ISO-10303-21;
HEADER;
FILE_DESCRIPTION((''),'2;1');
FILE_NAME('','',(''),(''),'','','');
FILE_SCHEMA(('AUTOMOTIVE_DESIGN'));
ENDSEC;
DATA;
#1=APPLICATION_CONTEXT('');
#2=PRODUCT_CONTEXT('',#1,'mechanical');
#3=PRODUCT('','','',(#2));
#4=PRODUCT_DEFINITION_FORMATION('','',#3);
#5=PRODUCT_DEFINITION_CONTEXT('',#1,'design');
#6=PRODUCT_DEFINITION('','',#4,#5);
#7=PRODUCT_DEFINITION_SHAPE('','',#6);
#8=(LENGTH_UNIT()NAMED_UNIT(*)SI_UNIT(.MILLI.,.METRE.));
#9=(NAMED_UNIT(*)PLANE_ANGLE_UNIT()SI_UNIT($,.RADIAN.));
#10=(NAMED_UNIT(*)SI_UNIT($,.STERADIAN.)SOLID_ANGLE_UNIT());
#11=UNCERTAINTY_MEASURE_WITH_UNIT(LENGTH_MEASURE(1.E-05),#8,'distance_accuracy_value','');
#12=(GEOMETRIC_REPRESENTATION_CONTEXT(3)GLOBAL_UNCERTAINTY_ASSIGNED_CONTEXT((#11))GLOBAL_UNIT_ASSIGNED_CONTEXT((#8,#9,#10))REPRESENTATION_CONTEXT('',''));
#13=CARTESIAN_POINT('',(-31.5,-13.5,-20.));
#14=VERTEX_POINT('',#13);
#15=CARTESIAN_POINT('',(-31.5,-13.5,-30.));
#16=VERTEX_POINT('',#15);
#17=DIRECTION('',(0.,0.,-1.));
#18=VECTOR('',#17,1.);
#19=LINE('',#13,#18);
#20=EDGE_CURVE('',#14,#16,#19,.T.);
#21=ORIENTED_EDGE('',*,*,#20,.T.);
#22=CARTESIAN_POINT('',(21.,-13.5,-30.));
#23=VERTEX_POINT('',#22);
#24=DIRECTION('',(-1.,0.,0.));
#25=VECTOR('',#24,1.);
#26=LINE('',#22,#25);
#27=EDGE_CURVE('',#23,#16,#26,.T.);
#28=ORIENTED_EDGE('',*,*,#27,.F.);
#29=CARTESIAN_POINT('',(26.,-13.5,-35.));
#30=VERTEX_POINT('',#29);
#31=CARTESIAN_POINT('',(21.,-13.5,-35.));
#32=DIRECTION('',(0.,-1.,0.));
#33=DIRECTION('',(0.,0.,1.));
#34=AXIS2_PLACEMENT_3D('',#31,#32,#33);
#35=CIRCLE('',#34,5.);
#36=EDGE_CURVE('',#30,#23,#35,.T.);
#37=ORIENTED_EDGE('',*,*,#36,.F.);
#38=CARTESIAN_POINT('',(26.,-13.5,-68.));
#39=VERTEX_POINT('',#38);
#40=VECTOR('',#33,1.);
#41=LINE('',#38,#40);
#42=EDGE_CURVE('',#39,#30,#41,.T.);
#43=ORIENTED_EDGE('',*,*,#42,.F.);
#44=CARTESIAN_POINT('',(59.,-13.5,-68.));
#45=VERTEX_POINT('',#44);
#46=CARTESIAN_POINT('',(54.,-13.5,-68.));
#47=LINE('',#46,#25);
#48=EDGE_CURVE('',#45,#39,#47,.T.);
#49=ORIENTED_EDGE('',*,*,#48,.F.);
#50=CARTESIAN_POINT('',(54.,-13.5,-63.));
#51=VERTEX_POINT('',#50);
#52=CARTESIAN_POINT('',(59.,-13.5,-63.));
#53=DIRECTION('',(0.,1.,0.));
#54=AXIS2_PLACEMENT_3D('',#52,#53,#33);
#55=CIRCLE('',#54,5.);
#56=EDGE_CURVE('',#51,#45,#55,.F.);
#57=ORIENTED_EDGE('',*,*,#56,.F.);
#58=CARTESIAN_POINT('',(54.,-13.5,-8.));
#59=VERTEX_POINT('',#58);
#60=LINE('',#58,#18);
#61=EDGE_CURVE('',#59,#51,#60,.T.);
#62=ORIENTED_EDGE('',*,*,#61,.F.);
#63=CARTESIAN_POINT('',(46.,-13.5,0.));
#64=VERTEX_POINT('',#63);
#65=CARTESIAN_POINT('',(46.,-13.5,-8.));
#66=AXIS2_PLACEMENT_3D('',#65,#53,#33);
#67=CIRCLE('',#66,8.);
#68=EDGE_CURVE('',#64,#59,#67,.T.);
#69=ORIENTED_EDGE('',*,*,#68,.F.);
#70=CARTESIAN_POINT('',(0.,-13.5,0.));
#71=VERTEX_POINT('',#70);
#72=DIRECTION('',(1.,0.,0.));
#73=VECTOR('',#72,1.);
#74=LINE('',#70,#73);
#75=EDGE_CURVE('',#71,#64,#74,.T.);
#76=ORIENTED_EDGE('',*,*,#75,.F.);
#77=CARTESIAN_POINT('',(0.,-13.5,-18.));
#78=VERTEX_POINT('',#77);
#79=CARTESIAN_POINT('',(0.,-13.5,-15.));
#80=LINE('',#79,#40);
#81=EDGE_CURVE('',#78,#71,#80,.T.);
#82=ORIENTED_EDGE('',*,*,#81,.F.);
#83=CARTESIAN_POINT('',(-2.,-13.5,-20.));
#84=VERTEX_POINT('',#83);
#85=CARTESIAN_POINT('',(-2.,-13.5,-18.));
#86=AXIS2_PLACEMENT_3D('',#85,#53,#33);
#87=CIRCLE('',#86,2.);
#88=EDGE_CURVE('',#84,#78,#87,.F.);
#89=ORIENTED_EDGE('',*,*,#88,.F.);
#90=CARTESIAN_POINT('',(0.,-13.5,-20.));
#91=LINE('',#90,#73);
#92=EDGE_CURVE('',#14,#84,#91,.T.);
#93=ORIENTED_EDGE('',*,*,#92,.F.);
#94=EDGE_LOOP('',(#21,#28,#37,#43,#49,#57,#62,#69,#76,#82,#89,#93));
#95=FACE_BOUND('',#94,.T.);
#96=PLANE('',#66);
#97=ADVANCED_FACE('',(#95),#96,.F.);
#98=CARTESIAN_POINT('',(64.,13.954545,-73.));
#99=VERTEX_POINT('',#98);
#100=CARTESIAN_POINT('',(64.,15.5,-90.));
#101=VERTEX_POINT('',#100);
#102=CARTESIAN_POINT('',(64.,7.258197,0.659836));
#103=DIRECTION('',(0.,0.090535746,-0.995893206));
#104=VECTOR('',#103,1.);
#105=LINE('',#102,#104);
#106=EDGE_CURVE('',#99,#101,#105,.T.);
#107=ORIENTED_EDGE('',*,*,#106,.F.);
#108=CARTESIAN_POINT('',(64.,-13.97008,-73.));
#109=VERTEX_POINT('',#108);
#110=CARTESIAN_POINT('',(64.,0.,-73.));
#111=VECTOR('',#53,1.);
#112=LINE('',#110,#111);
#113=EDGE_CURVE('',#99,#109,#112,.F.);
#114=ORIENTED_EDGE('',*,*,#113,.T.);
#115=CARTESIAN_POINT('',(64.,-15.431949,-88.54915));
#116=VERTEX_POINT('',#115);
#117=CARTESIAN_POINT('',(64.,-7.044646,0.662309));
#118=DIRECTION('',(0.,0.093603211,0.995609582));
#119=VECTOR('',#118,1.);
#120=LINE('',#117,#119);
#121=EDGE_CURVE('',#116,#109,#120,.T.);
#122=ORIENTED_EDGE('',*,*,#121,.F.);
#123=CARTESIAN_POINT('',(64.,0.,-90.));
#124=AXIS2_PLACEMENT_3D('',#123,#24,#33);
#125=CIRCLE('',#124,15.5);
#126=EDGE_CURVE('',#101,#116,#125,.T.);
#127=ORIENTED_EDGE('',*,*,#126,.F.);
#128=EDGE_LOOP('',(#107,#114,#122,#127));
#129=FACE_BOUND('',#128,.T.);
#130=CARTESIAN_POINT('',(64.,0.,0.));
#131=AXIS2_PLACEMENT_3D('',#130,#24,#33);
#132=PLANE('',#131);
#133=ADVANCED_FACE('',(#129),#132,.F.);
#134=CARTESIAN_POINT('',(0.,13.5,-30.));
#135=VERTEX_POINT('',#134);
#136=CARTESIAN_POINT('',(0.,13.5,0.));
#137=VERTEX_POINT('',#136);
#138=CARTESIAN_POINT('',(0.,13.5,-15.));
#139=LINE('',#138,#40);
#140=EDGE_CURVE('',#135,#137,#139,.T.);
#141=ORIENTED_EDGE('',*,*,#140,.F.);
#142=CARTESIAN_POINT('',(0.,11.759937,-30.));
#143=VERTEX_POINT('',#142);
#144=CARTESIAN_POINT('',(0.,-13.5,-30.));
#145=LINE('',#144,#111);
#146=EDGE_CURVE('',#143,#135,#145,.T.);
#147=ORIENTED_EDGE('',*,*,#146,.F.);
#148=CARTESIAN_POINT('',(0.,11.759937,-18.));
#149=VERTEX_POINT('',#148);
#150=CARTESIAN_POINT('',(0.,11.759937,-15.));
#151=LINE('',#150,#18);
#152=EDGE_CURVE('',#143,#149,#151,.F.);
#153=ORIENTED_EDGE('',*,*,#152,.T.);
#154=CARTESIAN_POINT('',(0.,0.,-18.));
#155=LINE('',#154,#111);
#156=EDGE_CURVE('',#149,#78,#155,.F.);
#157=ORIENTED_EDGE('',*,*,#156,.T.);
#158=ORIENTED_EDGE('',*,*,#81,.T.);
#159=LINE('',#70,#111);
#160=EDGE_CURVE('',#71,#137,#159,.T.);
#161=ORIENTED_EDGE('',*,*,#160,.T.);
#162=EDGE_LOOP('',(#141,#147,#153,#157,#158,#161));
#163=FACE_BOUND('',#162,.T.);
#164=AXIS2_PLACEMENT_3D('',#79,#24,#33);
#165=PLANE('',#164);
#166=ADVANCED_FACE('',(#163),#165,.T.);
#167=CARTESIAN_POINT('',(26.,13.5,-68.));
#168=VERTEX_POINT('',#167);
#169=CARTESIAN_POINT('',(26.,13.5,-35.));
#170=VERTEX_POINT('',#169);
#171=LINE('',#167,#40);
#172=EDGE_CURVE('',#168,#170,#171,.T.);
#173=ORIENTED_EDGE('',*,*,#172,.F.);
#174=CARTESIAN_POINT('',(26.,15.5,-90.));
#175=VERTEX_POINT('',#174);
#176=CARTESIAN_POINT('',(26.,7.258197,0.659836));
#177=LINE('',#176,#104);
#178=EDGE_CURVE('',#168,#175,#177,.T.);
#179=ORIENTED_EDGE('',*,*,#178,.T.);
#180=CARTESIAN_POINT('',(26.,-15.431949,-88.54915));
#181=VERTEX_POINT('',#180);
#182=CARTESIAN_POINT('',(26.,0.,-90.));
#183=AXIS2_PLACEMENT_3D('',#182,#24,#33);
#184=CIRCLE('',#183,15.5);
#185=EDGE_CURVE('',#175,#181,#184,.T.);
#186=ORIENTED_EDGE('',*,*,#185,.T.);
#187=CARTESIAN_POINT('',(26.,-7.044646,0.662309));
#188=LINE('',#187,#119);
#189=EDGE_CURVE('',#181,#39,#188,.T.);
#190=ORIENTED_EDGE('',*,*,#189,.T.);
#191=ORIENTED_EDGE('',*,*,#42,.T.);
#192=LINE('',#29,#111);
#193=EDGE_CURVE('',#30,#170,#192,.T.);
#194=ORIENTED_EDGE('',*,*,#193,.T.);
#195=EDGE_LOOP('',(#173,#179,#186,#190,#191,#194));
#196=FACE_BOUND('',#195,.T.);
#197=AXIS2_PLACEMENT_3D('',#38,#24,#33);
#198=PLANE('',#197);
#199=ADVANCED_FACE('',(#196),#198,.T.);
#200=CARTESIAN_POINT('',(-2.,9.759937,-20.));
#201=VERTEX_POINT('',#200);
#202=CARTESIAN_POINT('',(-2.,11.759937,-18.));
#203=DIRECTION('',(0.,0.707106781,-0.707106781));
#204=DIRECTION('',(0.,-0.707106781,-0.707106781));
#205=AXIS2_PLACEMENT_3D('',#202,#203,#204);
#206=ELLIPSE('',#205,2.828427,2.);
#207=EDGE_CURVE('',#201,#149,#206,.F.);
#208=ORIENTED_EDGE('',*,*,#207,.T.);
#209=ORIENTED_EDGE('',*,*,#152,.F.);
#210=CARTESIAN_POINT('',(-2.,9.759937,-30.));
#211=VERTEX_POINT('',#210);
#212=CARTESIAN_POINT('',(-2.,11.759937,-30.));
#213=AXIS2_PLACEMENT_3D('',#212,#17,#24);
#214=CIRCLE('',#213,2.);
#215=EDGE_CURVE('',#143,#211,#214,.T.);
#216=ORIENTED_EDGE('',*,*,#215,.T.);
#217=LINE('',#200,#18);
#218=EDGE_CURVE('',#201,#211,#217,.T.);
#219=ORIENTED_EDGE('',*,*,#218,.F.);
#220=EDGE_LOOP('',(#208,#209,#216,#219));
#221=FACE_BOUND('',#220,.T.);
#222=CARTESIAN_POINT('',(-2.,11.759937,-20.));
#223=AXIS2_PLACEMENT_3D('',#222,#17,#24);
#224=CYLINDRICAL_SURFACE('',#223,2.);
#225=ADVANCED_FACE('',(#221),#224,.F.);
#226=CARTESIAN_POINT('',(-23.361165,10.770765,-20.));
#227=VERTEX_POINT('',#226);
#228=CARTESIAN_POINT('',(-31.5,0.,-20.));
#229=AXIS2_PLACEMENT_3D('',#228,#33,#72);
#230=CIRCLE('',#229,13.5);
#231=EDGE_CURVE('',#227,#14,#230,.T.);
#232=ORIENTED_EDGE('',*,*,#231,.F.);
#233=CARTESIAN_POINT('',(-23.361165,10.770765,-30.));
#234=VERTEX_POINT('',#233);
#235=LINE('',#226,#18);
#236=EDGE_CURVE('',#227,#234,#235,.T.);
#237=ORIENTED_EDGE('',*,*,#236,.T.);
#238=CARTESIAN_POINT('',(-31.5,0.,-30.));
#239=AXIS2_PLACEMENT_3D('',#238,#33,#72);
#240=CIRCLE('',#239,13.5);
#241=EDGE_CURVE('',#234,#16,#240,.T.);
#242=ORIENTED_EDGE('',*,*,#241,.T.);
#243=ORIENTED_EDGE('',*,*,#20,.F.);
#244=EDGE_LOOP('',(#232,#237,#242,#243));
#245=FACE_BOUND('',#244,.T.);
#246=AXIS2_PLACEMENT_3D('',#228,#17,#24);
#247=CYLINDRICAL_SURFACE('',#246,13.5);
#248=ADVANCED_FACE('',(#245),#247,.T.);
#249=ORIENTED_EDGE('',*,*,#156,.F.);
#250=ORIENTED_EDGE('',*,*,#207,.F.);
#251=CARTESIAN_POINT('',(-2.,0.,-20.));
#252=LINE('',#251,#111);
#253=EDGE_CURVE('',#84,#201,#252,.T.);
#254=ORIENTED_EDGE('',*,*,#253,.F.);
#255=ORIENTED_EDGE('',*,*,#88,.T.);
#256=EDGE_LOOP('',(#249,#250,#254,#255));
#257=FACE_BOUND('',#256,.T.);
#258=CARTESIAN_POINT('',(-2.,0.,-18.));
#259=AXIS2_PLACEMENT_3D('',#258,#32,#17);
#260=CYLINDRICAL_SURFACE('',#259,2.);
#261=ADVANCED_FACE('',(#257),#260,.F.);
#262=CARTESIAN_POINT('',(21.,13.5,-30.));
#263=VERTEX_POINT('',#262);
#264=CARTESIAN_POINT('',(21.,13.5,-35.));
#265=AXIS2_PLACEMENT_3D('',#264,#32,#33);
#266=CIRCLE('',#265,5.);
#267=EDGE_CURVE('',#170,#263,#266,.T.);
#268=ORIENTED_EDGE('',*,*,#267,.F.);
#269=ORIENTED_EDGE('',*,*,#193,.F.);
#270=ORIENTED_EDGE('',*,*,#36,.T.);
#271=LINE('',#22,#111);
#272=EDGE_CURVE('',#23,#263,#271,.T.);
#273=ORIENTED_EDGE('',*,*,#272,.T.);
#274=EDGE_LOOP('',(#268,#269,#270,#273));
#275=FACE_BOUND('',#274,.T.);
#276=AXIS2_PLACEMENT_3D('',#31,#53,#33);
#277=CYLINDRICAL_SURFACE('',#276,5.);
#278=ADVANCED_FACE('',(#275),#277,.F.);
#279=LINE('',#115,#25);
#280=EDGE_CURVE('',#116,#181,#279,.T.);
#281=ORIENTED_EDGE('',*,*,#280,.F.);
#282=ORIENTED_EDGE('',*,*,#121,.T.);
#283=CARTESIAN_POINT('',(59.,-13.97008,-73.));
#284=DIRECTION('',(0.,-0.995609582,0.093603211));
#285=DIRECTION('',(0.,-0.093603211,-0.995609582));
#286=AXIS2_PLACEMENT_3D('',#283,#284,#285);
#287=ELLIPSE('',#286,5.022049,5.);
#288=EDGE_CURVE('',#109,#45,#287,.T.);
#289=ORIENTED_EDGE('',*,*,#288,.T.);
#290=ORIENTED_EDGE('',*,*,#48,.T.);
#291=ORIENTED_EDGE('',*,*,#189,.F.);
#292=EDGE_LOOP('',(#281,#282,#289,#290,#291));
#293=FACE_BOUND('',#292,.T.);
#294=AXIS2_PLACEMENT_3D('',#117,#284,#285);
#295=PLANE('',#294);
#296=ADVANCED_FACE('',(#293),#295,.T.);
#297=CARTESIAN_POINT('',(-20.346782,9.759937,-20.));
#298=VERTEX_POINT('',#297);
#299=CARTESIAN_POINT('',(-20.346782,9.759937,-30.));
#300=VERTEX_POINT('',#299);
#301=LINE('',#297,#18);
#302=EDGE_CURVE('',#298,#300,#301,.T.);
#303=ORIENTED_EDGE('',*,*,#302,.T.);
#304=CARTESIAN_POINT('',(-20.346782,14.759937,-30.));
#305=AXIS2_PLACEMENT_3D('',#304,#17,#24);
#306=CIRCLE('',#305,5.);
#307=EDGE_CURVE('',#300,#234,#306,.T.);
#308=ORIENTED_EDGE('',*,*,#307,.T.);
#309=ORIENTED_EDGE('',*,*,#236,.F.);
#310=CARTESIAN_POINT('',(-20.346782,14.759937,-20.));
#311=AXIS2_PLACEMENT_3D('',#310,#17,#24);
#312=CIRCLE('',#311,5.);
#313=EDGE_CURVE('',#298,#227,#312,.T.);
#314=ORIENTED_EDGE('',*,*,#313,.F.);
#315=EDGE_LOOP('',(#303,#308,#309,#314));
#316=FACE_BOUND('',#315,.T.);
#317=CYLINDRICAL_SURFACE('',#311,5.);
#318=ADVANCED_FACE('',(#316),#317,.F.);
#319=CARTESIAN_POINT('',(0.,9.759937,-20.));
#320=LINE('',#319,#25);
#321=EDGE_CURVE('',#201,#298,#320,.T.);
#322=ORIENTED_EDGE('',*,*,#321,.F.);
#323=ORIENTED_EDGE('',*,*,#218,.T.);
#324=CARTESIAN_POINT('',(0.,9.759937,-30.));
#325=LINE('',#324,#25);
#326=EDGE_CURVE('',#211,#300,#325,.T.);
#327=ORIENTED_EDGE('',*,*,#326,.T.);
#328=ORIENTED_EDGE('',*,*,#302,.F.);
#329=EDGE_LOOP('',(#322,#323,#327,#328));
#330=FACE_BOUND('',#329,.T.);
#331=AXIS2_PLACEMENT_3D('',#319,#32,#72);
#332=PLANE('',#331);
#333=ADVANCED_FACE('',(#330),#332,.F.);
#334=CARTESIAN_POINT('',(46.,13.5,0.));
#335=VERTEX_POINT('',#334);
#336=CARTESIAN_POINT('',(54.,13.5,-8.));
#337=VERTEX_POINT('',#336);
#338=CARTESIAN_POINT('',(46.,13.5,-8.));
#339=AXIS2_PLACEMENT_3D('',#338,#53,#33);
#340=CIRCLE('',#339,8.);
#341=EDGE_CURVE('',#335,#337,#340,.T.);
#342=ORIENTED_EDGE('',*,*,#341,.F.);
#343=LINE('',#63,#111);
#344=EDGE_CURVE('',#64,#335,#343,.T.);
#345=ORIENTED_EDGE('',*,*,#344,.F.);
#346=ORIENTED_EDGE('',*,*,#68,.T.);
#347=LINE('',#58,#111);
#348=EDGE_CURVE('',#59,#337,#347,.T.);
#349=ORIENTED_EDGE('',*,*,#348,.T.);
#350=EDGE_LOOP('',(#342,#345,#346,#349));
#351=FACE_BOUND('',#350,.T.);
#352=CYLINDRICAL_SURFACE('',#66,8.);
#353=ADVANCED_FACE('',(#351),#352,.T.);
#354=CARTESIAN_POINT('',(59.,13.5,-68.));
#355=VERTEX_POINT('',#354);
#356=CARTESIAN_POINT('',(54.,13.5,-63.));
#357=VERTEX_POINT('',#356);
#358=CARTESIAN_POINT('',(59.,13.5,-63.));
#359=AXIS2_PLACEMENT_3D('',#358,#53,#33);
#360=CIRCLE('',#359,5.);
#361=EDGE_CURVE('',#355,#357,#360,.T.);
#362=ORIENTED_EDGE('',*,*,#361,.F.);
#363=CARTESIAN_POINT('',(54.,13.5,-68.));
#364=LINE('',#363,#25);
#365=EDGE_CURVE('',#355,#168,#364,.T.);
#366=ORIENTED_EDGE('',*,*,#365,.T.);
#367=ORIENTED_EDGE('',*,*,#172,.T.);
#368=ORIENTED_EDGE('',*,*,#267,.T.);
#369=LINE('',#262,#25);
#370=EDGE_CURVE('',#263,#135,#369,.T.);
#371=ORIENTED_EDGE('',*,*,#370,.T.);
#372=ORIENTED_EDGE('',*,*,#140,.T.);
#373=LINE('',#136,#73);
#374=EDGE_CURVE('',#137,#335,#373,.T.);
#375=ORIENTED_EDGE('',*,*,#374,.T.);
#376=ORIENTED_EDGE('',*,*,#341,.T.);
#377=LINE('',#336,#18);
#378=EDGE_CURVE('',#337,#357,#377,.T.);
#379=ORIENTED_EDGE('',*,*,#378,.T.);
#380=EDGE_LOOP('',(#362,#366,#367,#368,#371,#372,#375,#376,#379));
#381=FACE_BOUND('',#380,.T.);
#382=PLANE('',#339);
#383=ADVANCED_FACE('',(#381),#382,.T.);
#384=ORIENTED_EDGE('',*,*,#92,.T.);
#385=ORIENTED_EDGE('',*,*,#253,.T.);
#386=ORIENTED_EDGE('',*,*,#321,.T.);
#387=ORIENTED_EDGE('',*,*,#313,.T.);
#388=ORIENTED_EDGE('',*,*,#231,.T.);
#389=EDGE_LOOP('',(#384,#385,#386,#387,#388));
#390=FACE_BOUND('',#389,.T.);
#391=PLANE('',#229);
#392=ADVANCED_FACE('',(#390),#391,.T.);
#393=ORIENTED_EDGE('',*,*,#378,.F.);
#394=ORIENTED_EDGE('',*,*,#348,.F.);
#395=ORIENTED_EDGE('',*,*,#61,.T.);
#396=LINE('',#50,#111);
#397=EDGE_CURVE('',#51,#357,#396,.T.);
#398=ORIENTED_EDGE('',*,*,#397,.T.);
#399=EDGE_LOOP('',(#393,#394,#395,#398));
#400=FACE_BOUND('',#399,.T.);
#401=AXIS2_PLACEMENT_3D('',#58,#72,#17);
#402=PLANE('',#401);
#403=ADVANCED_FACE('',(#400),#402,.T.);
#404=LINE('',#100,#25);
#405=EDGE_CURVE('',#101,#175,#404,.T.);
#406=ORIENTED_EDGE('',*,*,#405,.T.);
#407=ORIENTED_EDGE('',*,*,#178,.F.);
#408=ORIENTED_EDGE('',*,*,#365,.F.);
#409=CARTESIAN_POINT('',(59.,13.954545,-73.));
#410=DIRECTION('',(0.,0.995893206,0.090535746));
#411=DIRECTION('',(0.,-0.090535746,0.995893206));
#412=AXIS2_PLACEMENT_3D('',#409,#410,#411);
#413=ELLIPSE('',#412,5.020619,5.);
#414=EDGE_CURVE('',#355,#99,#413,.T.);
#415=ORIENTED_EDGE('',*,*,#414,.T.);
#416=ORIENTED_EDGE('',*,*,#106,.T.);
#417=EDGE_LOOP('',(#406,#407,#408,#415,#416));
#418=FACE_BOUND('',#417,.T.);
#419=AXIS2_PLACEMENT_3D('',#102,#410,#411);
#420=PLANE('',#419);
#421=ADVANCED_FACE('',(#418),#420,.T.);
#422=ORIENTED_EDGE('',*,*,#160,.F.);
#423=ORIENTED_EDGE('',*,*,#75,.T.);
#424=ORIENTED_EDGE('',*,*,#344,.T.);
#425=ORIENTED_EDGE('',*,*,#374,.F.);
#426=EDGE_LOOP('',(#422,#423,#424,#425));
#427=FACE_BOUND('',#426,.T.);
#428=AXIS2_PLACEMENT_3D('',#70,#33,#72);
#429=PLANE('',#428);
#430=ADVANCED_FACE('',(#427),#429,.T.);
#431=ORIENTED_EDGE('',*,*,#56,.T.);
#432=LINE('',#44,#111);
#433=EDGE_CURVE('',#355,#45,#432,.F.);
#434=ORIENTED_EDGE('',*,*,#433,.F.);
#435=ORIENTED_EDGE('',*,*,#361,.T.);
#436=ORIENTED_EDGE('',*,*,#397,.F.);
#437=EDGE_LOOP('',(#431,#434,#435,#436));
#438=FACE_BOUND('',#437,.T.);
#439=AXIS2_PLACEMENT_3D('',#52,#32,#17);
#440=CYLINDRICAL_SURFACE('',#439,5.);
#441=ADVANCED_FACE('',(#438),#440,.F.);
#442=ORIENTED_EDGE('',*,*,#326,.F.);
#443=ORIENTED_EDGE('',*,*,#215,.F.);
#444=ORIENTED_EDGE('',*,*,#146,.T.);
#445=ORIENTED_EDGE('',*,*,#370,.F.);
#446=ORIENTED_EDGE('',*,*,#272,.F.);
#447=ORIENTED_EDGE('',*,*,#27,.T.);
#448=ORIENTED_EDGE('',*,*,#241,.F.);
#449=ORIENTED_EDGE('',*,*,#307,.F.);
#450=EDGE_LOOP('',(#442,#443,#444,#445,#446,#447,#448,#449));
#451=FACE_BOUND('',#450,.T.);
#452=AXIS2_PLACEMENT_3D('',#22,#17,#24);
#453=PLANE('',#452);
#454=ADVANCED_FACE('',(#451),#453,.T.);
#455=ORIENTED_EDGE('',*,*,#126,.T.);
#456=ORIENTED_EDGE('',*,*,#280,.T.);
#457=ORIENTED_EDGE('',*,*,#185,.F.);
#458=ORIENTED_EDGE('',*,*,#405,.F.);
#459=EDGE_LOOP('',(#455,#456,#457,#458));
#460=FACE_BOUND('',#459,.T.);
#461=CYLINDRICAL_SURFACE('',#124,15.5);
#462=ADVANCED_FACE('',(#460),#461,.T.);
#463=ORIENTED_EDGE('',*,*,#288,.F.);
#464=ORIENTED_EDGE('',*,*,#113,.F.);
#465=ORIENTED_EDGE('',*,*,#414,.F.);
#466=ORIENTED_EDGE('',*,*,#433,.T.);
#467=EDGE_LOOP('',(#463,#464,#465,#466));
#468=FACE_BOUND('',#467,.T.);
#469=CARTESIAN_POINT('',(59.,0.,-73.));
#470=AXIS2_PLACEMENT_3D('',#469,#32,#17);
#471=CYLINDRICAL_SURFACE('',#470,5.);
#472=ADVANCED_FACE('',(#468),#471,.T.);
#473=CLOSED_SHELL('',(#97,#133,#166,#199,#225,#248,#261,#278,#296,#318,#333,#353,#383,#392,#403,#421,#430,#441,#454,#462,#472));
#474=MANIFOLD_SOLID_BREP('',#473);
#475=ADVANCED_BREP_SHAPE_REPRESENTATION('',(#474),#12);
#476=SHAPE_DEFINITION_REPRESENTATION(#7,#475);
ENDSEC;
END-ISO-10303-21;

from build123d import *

# Parameters (mm, degrees)
BOSS_EXTRUDE1_DEPTH      = 13.5
BOSS_EXTRUDE1_DEPTH_BACK = 13.5
BOSS_EXTRUDE2_START      = -30
BOSS_EXTRUDE2_DEPTH      = 10
FILLET3_R                = 2
BOSS_EXTRUDE3_DEPTH      = 38
FILLET4_R                = 5
FILLET5_R                = 5


with BuildPart() as part:
    # Sketch1 → Boss-Extrude1 (new, two sides: drawn at the far end of the back side and taken through both)
    with BuildSketch(Plane(origin=(0, 0, 0), x_dir=(1, 0, 0), z_dir=(0, 1, 0)).offset(-BOSS_EXTRUDE1_DEPTH_BACK)):
        with BuildLine():
            Line((0, 0), (46, 0))
            ThreePointArc((46, 0), (51.656854249, 2.343145751), (54, 8))
            Line((54, 8), (54, 68))
            Line((54, 68), (26, 68))
            Line((26, 68), (26, 35))
            ThreePointArc((26, 35), (24.535533906, 31.464466094), (21, 30))
            Line((21, 30), (0, 30))
            Line((0, 30), (0, 15))
            Line((0, 15), (0, 0))
        make_face()
    extrude(amount=BOSS_EXTRUDE1_DEPTH + BOSS_EXTRUDE1_DEPTH_BACK)

    # Sketch2 → Boss-Extrude2 (add)
    with BuildSketch(Plane.XY.offset(BOSS_EXTRUDE2_START)):
        with BuildLine():
            Line((0, -13.5), (-31.5, -13.5))
            ThreePointArc((-31.5, -13.5), (-44.299517979, 4.292125289), (-23.361165214, 10.770764519))
            ThreePointArc((-23.361165214, 10.770764519), (-21.936457993, 10.019374349), (-20.346781961, 9.759936564))
            Line((-20.346781961, 9.759936564), (0, 9.759936564))
            Line((0, 9.759936564), (0, -13.5))
        make_face()
    extrude(amount=BOSS_EXTRUDE2_DEPTH)

    # Fillet3
    fillet3_edges = [part.edges().sort_by_distance(p)[0] for p in [
        (0, 9.759936564, -25),
        (0, -1.870031718, -20),
    ]]
    fillet(fillet3_edges, radius=FILLET3_R)

    # Sketch4 → Boss-Extrude3 (add)
    with BuildSketch(Plane.ZY.offset(-26)):
        with BuildLine():
            ThreePointArc((-90, 15.5), (-105.482977781, -0.726222431), (-88.549150224, -15.431948514))
            Line((-88.549150224, -15.431948514), (-68, -13.5))
            Line((-68, -13.5), (-68, 13.5))
            Line((-68, 13.5), (-87.204918033, 15.245901639))
            Line((-87.204918033, 15.245901639), (-90, 15.5))
        make_face()
    extrude(amount=-BOSS_EXTRUDE3_DEPTH)

    # Fillet4
    fillet4_edges = [part.edges().sort_by_distance(p)[0] for p in [
        (54, 0, -68),
    ]]
    fillet(fillet4_edges, radius=FILLET4_R)

    # Fillet5
    fillet5_edges = [part.edges().sort_by_distance(p)[0] for p in [
        (64, 0, -68),
    ]]
    fillet(fillet5_edges, radius=FILLET5_R - 0.0001)  # a hair under: the kernel refuses the full size


solid = part.part
